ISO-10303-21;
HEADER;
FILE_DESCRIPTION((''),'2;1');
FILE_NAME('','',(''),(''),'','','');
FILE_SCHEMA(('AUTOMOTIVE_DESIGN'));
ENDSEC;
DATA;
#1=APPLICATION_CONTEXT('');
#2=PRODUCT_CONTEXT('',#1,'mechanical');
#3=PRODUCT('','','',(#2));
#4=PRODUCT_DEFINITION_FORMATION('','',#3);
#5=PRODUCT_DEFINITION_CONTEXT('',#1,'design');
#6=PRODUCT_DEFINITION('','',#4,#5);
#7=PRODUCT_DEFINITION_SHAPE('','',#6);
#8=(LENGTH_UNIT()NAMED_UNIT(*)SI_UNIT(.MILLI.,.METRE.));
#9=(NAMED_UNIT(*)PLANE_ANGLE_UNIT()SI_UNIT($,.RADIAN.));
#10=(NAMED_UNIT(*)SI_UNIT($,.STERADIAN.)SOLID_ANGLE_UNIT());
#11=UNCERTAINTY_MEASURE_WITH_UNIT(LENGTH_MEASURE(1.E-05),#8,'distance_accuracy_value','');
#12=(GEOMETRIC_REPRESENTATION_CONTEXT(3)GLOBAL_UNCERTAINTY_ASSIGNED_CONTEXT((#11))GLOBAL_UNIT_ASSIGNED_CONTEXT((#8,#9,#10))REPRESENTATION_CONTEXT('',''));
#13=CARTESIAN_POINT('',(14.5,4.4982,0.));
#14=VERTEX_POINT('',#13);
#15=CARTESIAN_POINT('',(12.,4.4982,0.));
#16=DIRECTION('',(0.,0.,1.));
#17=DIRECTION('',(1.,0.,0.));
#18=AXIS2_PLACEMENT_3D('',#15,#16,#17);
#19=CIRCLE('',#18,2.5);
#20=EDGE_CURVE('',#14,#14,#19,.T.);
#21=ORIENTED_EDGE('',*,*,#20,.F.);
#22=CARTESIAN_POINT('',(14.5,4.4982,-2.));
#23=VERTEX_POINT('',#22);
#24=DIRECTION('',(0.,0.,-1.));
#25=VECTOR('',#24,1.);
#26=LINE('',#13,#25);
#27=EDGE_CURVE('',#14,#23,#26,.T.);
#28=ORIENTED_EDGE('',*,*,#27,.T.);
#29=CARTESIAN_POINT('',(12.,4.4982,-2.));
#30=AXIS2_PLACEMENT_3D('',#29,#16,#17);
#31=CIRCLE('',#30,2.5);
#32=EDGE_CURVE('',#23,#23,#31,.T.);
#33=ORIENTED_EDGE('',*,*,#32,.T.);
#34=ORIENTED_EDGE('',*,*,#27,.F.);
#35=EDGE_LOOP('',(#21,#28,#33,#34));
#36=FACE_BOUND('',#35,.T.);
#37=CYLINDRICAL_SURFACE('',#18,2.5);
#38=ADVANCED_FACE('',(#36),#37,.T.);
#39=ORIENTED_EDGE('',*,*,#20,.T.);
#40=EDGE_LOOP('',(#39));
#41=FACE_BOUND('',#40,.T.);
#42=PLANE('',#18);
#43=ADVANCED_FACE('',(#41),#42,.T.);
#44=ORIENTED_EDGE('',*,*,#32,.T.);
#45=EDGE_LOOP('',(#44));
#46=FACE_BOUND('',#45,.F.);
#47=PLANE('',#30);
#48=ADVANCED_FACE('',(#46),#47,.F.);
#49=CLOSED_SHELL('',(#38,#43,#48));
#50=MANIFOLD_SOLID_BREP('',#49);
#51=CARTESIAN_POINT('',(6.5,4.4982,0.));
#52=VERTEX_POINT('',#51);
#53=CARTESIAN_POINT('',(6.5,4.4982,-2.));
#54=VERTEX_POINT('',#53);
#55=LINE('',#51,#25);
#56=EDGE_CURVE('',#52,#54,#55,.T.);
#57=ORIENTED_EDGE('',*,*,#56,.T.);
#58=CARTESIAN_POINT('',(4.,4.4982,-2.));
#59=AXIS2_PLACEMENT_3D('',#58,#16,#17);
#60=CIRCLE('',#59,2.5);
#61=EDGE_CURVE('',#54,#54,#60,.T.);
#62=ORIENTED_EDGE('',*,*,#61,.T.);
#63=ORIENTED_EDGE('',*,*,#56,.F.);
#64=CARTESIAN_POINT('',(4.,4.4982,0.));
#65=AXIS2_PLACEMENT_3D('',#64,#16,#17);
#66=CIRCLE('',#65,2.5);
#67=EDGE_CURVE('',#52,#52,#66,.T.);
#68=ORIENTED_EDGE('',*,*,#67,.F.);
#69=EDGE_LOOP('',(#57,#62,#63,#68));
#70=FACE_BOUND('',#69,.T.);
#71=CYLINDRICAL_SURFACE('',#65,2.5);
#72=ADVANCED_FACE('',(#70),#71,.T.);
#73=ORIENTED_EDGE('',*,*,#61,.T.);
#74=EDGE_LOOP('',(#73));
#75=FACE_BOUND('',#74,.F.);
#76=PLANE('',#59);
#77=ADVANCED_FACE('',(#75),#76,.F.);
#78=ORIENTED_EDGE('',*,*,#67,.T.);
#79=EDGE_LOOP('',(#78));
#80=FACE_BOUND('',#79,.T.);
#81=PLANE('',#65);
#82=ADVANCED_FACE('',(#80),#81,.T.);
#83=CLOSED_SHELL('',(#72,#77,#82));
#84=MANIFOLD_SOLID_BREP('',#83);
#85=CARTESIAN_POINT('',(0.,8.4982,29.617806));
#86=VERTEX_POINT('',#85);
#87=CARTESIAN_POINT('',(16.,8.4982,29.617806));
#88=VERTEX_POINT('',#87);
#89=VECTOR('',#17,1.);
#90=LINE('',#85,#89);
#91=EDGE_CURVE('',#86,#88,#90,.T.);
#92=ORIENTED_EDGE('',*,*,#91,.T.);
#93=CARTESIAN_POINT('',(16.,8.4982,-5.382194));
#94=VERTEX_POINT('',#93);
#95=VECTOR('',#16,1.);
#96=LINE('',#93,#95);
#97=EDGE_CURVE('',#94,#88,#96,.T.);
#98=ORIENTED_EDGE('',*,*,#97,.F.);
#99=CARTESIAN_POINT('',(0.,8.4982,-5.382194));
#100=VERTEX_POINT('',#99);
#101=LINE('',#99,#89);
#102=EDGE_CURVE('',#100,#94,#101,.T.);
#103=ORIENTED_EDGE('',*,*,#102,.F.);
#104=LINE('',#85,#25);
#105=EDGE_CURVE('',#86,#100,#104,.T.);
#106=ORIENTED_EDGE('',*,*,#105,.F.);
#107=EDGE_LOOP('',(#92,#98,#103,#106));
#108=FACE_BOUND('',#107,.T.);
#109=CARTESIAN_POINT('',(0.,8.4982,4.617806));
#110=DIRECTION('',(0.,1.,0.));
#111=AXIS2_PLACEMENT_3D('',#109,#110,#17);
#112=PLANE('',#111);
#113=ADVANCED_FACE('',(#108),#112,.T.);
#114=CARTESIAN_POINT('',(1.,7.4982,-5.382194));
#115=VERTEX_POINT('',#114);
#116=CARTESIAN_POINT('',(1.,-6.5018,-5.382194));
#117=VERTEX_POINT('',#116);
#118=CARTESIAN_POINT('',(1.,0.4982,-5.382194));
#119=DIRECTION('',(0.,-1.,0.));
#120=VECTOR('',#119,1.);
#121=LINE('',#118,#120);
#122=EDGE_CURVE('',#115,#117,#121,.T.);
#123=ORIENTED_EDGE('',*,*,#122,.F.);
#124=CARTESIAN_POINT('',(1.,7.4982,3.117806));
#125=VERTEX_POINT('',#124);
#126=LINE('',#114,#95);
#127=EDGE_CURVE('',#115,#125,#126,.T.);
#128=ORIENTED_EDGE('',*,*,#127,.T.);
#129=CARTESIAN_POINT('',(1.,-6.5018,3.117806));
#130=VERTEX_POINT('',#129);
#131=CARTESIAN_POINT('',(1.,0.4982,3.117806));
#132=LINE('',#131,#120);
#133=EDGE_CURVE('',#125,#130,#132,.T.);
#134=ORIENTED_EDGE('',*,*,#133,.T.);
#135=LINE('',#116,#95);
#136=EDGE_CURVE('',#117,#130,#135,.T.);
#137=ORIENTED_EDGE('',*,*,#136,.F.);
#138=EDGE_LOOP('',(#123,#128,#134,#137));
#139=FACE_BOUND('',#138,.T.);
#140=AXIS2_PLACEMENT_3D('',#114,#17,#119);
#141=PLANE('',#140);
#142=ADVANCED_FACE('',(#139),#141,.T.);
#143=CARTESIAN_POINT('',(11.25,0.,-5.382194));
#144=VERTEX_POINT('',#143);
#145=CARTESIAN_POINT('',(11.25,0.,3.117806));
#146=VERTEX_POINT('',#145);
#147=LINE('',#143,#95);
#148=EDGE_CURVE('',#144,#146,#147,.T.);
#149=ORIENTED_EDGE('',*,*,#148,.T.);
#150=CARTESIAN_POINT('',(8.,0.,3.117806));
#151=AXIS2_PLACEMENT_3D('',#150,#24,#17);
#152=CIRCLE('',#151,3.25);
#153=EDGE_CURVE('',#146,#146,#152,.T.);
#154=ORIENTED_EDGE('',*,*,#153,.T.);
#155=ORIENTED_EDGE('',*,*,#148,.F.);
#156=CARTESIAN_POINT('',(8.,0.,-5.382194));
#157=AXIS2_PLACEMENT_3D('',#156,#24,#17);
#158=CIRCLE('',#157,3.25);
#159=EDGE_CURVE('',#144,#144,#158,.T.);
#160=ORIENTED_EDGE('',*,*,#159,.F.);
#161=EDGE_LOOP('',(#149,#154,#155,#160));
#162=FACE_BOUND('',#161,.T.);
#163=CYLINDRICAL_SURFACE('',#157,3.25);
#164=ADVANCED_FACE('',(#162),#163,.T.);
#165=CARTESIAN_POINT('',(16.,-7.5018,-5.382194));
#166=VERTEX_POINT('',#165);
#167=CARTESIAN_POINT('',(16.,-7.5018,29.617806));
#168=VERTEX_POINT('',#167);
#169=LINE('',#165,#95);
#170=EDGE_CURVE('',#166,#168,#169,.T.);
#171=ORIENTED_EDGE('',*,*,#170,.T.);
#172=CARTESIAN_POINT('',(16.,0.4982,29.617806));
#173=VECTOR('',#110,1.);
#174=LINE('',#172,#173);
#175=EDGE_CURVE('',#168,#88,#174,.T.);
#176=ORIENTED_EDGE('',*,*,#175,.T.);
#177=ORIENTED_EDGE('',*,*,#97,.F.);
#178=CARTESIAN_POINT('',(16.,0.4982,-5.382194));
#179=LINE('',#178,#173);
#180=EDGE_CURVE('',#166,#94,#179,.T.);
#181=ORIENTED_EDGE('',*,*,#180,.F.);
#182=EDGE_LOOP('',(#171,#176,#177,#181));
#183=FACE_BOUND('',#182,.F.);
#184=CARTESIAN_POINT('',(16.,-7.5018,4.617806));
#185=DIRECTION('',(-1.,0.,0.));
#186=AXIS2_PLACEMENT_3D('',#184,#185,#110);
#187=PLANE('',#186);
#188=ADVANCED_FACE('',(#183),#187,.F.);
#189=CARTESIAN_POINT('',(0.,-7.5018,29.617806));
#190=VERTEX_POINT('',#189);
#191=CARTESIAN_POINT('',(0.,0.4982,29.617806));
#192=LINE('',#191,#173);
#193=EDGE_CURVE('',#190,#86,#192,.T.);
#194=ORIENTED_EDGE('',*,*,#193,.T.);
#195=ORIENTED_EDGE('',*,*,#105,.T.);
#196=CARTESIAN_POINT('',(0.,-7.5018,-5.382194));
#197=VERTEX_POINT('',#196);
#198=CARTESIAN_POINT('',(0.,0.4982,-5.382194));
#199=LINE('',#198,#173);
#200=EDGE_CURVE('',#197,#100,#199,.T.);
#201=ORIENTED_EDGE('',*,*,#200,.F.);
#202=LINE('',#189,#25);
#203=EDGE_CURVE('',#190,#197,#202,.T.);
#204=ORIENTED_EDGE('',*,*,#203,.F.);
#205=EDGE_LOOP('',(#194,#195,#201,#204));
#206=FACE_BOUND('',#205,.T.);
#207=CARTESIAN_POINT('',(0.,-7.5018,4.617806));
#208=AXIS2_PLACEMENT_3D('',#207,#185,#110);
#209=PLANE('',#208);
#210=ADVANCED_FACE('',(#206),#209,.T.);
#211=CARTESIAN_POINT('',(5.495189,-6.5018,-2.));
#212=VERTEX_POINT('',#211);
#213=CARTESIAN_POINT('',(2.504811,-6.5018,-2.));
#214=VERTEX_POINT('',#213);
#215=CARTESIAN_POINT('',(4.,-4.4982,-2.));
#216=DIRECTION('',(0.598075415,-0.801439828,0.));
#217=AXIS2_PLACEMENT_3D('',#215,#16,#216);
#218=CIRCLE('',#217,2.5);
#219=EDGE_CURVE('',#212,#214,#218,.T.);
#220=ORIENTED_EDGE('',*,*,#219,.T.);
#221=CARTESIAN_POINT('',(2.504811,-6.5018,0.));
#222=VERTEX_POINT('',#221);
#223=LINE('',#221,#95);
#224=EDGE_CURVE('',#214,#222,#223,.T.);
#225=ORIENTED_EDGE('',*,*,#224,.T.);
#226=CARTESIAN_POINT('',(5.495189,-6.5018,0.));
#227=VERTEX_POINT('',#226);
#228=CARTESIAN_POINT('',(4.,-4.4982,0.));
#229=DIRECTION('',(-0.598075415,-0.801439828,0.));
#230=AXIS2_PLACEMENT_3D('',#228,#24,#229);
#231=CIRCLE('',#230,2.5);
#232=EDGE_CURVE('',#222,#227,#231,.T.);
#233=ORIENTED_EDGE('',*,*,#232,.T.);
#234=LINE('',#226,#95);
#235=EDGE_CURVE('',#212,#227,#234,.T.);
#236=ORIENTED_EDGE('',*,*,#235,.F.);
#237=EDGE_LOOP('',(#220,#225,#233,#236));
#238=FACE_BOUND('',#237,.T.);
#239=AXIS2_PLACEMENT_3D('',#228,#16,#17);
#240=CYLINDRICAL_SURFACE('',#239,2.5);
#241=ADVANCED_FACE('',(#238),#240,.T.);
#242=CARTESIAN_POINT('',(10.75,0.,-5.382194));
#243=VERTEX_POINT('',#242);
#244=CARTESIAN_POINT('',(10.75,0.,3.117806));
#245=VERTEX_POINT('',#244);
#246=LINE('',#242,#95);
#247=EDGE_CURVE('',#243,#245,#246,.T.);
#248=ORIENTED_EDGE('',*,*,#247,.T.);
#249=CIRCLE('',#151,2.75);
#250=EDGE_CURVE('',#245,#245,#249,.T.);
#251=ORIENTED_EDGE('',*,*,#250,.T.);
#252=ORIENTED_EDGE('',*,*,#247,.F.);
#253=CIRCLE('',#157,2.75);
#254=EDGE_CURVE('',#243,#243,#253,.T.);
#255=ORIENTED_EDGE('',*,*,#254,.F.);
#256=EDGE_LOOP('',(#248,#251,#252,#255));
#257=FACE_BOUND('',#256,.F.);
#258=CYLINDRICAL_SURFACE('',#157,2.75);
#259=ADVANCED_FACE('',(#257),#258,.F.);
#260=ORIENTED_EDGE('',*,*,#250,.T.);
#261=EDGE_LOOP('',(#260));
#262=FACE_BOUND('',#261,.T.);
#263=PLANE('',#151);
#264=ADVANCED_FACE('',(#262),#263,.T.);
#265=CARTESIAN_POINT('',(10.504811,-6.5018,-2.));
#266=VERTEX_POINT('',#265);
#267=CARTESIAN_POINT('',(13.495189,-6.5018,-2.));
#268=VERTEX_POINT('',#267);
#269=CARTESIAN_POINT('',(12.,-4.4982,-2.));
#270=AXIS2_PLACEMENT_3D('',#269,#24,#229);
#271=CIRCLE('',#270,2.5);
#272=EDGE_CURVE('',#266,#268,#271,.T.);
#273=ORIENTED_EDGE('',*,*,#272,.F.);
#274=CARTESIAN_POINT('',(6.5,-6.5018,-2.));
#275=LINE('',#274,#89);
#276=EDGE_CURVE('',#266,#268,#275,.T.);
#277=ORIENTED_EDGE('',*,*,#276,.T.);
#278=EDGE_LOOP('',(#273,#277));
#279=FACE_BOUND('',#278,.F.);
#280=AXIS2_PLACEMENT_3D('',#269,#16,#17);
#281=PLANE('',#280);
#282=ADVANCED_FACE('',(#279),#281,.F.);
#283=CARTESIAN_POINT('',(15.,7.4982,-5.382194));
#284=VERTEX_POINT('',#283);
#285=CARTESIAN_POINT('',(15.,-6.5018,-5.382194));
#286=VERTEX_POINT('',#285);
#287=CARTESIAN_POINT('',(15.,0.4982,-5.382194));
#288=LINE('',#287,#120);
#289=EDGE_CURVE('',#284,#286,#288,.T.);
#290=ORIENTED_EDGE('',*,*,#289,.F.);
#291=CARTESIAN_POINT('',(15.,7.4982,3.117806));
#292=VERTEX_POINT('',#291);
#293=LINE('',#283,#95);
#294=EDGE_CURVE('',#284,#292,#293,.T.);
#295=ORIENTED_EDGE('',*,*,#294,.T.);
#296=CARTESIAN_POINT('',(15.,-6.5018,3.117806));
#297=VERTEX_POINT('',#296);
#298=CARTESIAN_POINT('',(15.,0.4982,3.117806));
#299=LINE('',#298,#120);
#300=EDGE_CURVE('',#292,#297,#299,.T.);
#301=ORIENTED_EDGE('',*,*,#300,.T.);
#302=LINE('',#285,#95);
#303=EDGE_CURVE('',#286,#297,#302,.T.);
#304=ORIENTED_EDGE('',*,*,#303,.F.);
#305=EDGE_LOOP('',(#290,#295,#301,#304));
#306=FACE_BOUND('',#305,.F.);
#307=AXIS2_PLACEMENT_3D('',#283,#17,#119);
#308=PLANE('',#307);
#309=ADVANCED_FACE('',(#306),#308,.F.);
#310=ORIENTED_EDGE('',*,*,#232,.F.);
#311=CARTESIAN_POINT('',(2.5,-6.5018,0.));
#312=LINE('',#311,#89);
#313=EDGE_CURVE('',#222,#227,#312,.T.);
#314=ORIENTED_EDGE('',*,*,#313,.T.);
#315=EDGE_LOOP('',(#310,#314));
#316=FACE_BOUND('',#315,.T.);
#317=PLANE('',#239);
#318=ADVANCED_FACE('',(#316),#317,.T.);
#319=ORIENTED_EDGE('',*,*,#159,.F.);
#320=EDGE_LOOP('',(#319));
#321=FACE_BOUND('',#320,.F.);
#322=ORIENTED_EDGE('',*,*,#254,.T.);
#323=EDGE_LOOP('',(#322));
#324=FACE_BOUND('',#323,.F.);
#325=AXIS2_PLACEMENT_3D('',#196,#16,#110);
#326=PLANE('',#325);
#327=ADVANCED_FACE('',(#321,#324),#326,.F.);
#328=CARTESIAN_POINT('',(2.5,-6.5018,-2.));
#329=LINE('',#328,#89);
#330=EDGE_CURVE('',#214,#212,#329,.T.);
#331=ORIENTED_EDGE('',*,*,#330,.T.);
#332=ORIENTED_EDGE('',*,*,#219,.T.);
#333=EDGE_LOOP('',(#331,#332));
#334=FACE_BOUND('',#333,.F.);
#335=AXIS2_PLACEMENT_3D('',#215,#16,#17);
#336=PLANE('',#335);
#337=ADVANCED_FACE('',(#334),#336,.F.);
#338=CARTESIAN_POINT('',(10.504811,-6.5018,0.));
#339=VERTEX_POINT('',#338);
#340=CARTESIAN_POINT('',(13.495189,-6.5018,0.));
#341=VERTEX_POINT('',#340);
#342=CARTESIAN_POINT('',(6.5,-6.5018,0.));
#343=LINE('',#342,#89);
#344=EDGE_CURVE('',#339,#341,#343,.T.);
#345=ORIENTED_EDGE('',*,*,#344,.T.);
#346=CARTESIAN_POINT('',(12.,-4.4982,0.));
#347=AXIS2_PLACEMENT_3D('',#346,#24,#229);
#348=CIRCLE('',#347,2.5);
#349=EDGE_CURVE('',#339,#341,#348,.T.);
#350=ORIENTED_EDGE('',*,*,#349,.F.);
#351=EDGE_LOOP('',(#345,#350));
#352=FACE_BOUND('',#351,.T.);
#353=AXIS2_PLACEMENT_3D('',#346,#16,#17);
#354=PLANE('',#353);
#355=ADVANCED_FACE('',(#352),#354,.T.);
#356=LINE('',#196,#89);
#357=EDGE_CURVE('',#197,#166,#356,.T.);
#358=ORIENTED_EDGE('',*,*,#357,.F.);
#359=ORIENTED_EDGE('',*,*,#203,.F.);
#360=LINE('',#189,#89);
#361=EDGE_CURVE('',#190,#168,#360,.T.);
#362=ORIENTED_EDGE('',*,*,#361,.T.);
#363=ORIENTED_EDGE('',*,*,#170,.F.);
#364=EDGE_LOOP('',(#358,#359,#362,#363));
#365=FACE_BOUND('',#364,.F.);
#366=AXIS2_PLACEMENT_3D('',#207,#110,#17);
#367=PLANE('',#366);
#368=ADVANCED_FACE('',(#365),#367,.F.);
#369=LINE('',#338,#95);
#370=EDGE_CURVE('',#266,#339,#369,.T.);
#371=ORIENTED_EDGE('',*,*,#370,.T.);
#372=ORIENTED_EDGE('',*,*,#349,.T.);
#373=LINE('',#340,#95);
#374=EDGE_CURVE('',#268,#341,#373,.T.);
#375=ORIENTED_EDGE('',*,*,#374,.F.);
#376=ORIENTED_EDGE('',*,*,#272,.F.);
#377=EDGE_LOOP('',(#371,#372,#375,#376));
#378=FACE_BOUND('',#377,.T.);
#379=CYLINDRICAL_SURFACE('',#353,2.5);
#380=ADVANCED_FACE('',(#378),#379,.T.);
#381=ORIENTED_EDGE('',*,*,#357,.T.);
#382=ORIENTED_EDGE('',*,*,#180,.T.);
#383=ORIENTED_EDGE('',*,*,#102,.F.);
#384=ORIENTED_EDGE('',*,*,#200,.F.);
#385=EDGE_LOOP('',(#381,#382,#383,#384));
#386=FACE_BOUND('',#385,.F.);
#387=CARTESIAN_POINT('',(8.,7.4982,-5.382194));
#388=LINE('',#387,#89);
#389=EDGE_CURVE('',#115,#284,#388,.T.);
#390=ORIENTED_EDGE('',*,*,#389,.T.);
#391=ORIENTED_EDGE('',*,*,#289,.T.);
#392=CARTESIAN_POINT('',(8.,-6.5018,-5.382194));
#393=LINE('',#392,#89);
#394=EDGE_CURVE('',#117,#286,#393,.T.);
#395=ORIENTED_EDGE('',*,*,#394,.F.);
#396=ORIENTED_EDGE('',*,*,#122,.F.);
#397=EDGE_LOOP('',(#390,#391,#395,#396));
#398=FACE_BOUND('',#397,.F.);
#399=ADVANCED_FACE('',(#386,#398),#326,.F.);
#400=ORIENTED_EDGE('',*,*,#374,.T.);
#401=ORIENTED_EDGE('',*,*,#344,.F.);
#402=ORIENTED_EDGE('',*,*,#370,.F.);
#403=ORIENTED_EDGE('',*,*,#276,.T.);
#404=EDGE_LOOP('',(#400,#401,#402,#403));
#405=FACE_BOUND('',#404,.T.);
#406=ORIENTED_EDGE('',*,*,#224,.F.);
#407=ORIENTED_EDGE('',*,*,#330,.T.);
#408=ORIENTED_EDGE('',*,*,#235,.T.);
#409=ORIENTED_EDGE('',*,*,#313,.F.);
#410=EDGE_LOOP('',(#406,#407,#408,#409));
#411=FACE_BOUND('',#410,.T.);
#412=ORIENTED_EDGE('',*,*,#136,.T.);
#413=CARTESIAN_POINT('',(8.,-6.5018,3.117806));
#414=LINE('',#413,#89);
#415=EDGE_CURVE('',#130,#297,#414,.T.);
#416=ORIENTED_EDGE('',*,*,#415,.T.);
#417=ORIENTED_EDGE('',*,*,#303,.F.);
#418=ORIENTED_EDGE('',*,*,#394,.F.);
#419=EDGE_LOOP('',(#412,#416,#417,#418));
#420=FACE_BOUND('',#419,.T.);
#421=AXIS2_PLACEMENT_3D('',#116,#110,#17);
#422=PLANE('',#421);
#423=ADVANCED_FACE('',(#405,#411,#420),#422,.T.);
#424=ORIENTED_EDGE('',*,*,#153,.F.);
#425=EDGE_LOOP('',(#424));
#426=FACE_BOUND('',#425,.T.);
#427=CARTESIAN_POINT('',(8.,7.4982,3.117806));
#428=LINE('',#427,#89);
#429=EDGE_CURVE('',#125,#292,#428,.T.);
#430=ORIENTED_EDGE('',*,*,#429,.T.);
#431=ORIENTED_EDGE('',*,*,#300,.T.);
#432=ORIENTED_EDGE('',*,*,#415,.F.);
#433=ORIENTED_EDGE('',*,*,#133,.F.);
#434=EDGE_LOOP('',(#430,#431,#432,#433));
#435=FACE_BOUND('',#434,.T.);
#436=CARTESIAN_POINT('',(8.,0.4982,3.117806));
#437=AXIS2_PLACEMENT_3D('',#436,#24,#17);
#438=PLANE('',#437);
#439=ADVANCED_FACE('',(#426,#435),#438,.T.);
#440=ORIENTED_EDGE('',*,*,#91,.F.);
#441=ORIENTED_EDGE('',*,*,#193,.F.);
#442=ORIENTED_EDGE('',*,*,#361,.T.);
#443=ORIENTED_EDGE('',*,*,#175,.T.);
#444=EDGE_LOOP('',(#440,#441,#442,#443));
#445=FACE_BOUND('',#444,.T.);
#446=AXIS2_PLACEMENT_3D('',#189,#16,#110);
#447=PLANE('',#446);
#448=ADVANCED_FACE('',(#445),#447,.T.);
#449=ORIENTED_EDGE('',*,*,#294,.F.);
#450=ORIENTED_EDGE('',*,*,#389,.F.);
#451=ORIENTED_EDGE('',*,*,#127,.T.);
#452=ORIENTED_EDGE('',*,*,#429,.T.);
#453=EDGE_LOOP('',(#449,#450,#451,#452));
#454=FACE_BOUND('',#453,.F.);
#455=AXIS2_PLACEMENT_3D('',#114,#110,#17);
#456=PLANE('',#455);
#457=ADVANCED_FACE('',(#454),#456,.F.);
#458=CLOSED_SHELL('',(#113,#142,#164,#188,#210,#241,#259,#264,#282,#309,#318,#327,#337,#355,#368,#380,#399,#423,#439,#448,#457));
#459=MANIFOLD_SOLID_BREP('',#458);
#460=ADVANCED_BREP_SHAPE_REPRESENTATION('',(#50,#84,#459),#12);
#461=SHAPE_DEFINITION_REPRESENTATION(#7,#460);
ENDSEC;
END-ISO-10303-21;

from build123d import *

# Parameters (mm, degrees)
F0_W     = 16
F0_H     = 10
F1_DEPTH = 16
F2_W     = 14
F2_H     = 14
F2_R     = 3.25
F2_R_2   = 2.75
F3_DEPTH = 8.5
F5_DEPTH = 25
F4_R     = 2.5
F6_DEPTH = 2


# Not quite as in the source:
# - a feature names something its author has since deleted; it is built from what else it names


with BuildPart() as f1:
    # F0 (on Right) → F1 (new body)
    with BuildSketch(Plane.YZ):
        with Locations((0.4982002154, -0.3821941838)):
            Rectangle(F0_W, F0_H)
    extrude(amount=F1_DEPTH)

    # F2 (on face) → F3 (cut)
    with BuildSketch(Plane(origin=(0, 0, -5.3821941838), x_dir=(1, 0, 0), z_dir=(0, 0, -1))):
        with Locations((8, -0.4982002154)):
            Rectangle(F2_W, F2_H)
        with Locations((8, 0)):
            Circle(F2_R, mode=Mode.SUBTRACT)
        with Locations((8, 0)):
            Circle(F2_R_2)
    extrude(amount=-F3_DEPTH, mode=Mode.SUBTRACT)

    # F5 (add): a face of the model
    f5_faces = [f1.faces().sort_by_distance(p)[0] for p in [
        (8, 0.4982002154, 4.6178058162),
    ]]
    extrude(f5_faces, amount=F5_DEPTH)

    # F4 (on Top) → F6, piece 3 (join)
    with BuildSketch(Plane.XY):
        with Locations((4, -4.4982002154)):
            Circle(F4_R)
        with Locations((12, -4.4982002154)):
            Circle(F4_R)
    extrude(amount=-F6_DEPTH)


with BuildPart() as f6:
    # F4 (on Top) → F6 (new body)
    with BuildSketch(Plane.XY):
        with Locations((4, 4.4982002154)):
            Circle(F4_R)
    extrude(amount=-F6_DEPTH)


with BuildPart() as f6b:
    # F4 (on Top) → F6, piece 2 (new body)
    with BuildSketch(Plane.XY):
        with Locations((12, 4.4982002154)):
            Circle(F4_R)
    extrude(amount=-F6_DEPTH)


solid = Compound([f1.part, f6.part, f6b.part])
